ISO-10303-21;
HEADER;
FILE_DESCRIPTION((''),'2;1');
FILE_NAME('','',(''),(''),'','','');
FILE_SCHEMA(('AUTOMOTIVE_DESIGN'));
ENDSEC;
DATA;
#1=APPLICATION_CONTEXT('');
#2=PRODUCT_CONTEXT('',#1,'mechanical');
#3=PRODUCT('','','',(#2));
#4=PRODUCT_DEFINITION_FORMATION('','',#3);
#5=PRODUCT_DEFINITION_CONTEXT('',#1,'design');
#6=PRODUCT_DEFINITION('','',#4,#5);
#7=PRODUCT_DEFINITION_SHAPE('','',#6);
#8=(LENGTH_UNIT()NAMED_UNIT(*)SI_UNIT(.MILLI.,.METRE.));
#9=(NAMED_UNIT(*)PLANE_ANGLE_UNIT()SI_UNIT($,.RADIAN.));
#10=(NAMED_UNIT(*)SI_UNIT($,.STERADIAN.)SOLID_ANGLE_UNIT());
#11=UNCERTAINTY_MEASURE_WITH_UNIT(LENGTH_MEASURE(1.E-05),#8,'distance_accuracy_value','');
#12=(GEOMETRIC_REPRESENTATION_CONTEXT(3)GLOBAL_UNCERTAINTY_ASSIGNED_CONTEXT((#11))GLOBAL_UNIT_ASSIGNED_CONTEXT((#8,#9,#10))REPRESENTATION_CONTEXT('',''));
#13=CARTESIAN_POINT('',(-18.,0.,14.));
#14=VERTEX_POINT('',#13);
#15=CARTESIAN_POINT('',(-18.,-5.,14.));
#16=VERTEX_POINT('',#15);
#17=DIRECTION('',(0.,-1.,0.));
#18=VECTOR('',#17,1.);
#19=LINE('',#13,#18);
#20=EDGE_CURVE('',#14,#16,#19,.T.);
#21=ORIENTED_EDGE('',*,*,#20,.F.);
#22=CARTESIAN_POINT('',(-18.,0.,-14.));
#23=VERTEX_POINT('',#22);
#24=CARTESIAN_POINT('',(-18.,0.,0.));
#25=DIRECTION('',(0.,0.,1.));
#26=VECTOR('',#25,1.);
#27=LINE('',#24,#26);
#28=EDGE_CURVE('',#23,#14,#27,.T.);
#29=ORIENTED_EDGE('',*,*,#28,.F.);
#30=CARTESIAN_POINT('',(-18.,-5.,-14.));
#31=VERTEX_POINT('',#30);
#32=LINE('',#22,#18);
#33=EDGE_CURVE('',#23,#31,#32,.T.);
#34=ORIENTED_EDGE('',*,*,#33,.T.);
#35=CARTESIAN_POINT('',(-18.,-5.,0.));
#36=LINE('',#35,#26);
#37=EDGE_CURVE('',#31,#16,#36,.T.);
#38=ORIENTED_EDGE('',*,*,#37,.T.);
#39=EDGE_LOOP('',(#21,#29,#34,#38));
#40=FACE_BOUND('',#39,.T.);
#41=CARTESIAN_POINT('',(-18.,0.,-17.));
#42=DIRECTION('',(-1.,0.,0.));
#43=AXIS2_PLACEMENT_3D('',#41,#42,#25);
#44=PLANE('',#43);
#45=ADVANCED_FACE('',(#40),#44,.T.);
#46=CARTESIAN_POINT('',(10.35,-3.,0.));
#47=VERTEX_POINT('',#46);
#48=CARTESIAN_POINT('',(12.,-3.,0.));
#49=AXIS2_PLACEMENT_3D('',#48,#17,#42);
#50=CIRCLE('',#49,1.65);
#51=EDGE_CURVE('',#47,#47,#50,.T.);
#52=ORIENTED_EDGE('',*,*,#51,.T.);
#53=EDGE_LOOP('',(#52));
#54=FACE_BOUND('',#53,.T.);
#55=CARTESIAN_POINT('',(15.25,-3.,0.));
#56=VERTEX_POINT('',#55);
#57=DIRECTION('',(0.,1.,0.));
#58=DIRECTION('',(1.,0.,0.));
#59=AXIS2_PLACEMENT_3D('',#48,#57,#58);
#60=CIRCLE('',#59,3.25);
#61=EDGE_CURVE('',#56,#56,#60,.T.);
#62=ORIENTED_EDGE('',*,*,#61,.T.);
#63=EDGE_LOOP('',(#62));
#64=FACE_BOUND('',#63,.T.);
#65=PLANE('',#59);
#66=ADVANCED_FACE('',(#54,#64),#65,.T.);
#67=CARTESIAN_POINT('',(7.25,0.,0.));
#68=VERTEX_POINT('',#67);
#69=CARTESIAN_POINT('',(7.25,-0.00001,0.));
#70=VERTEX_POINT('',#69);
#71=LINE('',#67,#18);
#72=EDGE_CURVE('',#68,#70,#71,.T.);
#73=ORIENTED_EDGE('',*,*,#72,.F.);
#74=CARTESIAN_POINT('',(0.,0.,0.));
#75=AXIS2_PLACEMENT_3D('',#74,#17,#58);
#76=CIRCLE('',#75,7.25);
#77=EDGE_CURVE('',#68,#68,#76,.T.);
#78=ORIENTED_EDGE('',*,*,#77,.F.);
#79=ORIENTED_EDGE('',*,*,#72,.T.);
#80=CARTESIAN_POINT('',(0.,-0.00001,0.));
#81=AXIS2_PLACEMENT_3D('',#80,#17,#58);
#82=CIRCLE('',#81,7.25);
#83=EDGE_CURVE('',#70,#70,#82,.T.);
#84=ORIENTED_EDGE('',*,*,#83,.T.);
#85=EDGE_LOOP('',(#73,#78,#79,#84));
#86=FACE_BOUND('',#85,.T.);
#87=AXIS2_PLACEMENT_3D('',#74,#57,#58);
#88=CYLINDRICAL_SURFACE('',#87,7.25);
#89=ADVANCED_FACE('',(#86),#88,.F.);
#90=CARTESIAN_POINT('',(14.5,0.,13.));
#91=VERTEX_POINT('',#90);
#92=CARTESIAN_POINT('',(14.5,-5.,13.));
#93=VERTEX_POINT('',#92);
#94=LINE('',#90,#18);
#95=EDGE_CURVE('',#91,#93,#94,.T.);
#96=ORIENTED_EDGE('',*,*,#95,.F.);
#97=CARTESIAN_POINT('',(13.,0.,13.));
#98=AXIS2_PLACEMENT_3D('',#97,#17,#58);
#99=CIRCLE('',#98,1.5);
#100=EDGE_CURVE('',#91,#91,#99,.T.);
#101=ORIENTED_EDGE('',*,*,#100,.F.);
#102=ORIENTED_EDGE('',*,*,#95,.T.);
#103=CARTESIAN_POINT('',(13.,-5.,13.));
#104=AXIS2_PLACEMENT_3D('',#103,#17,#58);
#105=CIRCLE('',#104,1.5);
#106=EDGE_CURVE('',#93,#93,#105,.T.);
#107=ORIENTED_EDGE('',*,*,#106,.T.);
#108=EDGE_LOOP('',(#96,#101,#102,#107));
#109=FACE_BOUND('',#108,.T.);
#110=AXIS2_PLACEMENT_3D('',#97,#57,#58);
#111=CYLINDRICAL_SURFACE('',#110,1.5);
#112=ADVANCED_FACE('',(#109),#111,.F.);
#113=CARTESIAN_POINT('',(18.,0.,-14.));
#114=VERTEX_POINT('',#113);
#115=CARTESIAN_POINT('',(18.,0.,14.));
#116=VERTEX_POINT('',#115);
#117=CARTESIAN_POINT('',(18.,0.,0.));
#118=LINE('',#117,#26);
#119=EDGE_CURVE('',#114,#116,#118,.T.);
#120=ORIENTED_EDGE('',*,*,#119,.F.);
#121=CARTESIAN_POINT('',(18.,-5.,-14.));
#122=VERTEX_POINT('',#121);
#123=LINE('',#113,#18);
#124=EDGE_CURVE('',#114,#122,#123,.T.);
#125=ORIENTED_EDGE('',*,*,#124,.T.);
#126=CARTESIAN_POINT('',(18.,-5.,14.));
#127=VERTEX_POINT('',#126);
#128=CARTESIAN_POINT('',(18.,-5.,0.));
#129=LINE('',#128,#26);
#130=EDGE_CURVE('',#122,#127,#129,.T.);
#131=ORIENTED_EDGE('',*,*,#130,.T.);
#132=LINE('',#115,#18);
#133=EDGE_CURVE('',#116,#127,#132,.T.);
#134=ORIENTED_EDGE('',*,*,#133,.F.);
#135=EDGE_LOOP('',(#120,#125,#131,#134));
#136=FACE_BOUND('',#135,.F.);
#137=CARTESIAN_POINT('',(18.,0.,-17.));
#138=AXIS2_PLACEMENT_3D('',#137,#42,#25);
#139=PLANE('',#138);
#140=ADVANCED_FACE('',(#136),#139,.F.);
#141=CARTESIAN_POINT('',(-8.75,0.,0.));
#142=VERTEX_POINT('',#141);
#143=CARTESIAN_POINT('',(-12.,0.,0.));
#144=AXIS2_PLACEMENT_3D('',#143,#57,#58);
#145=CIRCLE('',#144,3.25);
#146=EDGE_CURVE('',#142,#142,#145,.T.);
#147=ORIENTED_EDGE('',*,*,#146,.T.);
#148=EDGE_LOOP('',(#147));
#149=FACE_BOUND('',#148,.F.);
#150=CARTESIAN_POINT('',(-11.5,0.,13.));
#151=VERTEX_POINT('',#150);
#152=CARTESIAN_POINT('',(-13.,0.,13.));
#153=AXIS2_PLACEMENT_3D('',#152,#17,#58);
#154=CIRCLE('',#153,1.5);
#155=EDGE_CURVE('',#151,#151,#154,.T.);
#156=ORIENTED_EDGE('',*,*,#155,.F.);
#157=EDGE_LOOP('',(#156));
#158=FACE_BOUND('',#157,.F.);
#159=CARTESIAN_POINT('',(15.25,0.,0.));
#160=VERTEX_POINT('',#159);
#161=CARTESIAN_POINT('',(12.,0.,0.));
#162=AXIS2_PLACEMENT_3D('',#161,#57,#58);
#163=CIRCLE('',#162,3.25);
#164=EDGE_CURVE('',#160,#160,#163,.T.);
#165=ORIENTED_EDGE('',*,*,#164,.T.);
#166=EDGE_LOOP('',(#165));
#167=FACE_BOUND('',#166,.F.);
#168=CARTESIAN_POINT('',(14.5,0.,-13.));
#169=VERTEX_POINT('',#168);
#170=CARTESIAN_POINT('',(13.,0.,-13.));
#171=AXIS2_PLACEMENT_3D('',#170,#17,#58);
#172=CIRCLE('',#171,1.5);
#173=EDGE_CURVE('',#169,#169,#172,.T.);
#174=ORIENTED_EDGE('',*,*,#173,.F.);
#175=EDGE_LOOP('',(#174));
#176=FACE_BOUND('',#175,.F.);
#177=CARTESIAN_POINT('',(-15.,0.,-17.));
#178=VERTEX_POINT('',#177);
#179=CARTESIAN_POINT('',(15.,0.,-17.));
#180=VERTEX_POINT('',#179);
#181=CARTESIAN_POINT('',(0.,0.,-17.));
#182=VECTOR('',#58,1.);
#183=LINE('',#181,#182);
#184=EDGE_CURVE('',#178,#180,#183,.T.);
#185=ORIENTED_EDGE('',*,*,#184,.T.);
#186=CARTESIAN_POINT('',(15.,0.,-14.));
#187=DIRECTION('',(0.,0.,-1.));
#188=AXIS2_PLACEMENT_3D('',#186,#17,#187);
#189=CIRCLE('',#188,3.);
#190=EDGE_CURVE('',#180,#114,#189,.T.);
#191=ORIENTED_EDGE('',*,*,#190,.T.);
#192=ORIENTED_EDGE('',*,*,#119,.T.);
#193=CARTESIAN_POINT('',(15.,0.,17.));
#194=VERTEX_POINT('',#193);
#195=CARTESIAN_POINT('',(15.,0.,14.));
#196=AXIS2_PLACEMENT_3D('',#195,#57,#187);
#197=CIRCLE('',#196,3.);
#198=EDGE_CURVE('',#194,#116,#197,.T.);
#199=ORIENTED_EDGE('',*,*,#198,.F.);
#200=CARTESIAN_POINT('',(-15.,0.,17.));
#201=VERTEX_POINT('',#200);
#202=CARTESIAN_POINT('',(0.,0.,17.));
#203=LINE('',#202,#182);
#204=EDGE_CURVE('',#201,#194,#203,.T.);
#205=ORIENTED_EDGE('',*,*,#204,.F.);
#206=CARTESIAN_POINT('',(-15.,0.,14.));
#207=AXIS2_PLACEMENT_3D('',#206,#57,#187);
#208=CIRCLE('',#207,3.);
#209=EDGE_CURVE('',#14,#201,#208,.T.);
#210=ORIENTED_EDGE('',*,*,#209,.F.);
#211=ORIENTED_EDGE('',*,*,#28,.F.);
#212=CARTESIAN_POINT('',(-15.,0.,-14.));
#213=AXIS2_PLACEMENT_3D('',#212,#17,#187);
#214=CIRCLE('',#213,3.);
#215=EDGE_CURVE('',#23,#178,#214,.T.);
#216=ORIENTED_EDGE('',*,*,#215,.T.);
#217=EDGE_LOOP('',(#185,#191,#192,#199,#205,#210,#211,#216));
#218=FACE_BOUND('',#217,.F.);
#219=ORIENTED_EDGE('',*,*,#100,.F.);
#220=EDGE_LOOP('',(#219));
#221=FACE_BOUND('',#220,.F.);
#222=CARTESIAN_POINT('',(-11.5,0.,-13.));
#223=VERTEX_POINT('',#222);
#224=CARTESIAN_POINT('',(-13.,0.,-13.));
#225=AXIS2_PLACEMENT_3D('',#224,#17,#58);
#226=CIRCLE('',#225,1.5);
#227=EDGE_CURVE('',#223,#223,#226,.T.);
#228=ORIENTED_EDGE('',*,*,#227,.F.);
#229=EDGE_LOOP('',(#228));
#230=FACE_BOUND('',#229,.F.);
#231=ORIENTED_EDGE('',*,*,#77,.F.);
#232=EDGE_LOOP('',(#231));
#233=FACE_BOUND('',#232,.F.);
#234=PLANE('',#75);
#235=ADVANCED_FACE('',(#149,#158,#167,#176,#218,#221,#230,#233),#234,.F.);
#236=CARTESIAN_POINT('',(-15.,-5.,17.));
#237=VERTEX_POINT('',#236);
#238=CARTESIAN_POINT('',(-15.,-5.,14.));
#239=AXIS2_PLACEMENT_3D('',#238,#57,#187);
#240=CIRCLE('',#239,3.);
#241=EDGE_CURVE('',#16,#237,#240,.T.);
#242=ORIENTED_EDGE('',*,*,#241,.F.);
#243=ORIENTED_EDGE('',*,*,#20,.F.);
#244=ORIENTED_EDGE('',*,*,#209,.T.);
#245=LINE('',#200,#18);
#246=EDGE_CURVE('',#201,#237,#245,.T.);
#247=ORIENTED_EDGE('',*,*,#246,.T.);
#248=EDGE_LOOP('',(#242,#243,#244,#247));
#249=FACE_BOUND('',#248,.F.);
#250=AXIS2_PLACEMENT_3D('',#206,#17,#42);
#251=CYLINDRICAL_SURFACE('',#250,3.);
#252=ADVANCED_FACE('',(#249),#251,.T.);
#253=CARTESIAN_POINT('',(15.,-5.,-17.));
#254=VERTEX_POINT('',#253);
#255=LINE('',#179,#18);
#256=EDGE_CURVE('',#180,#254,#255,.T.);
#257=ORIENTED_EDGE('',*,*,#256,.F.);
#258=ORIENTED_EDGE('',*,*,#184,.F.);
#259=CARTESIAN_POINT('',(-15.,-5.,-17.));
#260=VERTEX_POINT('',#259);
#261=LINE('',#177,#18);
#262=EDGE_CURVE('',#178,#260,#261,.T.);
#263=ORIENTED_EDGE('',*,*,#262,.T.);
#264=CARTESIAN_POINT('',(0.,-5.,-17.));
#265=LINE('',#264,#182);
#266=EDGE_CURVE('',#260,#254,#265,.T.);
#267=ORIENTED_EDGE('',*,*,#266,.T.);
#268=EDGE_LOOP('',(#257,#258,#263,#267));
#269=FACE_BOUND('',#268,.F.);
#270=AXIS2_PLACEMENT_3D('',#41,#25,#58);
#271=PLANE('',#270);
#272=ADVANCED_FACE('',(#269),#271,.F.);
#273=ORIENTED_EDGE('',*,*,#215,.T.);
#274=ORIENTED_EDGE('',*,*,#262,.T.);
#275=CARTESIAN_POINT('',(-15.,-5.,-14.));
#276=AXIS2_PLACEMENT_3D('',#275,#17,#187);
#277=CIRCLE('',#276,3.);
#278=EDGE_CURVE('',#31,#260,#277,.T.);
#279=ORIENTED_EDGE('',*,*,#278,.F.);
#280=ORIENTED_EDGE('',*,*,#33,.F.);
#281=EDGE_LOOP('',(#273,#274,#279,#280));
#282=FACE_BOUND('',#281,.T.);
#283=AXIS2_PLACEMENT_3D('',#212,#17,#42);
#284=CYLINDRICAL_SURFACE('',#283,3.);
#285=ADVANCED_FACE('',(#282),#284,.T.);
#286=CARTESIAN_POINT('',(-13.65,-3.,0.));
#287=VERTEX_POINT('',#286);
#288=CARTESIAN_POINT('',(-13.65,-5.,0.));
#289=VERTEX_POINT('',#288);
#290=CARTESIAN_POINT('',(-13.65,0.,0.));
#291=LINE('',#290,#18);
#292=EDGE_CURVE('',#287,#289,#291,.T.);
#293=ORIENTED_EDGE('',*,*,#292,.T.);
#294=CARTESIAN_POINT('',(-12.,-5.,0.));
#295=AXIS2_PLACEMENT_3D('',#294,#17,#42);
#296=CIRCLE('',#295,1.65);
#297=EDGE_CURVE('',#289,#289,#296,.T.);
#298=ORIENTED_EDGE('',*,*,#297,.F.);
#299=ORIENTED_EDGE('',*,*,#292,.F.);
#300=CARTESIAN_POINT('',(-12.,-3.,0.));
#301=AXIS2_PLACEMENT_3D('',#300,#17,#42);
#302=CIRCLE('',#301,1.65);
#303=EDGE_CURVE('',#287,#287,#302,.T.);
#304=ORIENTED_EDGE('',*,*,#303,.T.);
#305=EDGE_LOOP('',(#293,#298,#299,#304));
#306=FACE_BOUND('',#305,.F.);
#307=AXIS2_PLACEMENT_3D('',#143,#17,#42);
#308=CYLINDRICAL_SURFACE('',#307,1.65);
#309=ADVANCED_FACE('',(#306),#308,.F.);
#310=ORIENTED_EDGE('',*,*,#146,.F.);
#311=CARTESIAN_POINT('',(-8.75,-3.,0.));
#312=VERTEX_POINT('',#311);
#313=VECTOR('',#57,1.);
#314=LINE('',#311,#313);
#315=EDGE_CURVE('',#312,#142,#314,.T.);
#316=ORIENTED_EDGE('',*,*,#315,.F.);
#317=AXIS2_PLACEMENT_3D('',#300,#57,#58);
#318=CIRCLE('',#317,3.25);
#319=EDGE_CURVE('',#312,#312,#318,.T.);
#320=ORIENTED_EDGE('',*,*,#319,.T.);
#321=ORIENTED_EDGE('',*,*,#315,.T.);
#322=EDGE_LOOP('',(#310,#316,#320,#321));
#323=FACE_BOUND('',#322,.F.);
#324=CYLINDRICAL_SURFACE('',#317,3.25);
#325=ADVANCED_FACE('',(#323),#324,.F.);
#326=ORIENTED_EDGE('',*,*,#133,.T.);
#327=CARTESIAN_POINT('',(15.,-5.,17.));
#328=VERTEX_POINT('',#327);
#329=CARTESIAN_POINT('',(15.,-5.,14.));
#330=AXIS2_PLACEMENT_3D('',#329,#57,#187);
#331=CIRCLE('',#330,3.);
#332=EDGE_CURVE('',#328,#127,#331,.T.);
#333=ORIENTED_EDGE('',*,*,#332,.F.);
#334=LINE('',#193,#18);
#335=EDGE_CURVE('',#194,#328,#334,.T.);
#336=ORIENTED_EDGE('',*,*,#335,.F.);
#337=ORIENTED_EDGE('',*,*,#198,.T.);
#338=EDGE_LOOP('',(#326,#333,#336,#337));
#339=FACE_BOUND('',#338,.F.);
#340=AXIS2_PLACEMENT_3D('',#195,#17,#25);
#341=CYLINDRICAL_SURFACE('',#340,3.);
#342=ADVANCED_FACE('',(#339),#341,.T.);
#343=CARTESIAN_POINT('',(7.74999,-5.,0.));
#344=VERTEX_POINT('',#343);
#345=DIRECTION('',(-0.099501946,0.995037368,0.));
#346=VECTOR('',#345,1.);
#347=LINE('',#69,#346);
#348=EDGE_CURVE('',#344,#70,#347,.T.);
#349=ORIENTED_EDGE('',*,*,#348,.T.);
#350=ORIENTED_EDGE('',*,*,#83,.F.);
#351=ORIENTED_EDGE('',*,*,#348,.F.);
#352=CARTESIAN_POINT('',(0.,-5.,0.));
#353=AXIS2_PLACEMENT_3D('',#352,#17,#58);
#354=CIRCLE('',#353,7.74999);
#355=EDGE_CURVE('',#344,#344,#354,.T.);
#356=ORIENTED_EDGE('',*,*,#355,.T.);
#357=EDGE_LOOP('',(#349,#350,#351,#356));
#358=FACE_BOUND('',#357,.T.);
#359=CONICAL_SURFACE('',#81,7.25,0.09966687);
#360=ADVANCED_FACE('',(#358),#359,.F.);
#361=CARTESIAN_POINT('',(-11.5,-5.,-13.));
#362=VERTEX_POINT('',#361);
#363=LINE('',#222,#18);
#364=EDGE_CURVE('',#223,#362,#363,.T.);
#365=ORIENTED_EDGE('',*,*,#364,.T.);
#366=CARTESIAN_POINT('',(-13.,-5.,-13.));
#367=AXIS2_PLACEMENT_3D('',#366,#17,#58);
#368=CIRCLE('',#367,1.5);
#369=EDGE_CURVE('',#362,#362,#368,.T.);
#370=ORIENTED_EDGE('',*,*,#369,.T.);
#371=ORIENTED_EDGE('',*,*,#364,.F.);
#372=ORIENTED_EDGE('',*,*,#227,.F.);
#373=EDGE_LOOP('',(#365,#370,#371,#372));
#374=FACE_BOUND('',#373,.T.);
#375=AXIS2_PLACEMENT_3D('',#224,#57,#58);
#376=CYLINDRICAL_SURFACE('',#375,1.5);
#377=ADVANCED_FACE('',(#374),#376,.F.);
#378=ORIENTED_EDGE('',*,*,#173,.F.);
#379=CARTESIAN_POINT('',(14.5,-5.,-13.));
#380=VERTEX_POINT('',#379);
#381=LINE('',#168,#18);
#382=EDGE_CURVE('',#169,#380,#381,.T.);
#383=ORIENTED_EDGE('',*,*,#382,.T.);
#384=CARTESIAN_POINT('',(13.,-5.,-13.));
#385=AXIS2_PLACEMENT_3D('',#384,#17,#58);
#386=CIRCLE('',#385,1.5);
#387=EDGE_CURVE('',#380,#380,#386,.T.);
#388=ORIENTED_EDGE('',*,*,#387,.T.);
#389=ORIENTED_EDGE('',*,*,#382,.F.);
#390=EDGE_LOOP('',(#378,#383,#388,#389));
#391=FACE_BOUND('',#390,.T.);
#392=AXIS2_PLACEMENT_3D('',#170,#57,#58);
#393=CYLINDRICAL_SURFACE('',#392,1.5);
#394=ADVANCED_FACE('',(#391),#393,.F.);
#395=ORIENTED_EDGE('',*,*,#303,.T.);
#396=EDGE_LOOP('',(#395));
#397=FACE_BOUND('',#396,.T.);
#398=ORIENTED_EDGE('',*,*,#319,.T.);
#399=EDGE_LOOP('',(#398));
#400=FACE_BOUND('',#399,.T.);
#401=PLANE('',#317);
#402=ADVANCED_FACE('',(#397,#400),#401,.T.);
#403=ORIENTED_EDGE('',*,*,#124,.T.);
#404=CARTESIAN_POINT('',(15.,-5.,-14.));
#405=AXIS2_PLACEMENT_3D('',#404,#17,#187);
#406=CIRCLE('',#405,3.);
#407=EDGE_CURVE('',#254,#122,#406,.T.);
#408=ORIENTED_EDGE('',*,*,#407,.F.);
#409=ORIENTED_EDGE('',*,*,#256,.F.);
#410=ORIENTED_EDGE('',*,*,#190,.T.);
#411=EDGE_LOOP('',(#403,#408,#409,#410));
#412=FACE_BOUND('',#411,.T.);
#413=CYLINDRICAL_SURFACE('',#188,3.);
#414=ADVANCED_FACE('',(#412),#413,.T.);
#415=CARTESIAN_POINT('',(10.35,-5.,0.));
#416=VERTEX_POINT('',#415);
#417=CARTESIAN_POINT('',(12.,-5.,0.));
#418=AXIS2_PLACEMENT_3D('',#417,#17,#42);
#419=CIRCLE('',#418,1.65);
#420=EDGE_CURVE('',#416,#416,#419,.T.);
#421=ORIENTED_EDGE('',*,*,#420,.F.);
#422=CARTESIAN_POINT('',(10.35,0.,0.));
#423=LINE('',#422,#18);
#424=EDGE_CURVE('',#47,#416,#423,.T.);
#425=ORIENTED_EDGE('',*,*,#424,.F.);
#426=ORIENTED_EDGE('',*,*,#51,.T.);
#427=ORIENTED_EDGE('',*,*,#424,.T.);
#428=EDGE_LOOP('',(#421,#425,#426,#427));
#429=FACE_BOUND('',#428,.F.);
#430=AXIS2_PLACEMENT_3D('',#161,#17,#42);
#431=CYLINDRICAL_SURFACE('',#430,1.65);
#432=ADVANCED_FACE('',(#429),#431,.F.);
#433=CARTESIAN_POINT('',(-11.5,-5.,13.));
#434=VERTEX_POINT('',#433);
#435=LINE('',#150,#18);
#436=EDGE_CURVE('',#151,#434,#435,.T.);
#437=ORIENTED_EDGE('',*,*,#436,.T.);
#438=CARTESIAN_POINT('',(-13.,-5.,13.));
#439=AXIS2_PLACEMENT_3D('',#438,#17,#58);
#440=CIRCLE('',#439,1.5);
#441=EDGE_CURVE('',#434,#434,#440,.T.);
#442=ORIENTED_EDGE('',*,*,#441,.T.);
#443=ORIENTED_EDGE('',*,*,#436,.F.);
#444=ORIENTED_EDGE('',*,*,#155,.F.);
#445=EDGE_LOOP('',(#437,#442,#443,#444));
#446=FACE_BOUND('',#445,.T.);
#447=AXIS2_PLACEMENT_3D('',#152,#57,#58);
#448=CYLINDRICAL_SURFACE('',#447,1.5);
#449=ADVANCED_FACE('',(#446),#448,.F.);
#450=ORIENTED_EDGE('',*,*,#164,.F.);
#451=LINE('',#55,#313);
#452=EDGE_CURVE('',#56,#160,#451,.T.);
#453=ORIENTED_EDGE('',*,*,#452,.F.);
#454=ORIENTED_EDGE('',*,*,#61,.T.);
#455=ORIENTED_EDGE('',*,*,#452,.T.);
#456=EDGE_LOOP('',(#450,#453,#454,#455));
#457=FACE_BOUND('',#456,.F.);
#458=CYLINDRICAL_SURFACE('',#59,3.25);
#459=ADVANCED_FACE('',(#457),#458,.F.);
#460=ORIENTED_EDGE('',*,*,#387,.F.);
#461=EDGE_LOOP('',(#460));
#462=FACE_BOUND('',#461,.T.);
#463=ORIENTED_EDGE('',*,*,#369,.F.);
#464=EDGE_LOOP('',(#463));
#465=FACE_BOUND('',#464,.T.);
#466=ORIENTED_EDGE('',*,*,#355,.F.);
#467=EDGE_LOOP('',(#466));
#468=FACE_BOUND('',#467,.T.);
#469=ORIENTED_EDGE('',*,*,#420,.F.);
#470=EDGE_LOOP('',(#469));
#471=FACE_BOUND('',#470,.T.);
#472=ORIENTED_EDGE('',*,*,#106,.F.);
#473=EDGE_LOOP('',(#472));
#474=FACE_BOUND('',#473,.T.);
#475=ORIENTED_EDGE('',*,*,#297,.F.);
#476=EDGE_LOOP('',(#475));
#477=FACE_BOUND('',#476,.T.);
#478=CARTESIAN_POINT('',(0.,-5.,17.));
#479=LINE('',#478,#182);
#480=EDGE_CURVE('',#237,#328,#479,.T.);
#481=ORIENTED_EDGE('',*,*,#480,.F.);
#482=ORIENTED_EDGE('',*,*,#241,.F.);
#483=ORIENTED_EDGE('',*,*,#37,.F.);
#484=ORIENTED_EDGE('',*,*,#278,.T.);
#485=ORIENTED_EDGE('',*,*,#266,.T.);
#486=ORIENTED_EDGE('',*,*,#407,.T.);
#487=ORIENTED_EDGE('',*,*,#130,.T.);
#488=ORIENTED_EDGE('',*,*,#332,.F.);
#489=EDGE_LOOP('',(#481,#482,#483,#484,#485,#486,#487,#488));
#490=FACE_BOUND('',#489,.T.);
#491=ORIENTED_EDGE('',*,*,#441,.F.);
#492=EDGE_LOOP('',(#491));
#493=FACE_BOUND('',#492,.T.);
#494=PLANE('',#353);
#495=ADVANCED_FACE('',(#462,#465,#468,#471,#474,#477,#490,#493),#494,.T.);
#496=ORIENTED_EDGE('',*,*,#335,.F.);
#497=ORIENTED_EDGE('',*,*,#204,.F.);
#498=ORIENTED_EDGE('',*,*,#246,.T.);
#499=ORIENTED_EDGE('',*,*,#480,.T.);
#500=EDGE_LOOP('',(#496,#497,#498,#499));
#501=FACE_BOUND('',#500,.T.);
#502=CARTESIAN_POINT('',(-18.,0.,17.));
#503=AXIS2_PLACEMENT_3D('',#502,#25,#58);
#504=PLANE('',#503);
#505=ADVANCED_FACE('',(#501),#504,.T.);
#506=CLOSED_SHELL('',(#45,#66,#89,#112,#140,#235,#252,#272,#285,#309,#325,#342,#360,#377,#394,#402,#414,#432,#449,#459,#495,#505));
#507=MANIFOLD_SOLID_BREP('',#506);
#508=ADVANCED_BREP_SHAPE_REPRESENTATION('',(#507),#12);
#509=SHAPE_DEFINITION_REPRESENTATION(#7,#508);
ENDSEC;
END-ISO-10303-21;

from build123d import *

# Parameters (mm, degrees)
F0_W           = 36
F0_H           = 34
F0_R           = 1.5
F0_R_2         = 7.25
F1_DEPTH       = 5
F2_R           = 3
F3_SIZE2       = 4.99999
F3_SIZE        = 0.49999
F4_D           = 3.3
F4_CBORE_D     = 6.5
F4_CBORE_DEPTH = 3


# Not quite as in the source:
# - a fillet or chamfer is up to 0.001 mm smaller than in the source, because OpenCascade refuses the exact size


with BuildPart() as f1:
    # F0 (on Front) → F1 (new body)
    with BuildSketch(Plane.XZ):
        Rectangle(F0_W, F0_H)
        with Locations((-13, -13)):
            Circle(F0_R, mode=Mode.SUBTRACT)
        with Locations((13, -13)):
            Circle(F0_R, mode=Mode.SUBTRACT)
        with Locations((-13, 13)):
            Circle(F0_R, mode=Mode.SUBTRACT)
        Circle(F0_R_2, mode=Mode.SUBTRACT)
        with Locations((13, 13)):
            Circle(F0_R, mode=Mode.SUBTRACT)
    extrude(amount=F1_DEPTH)

    # F2
    f2_edges = [f1.edges().sort_by_distance(p)[0] for p in [
        (-18, -2.5, 17),
        (18, -2.5, 17),
        (18, -2.5, -17),
        (-18, -2.5, -17),
    ]]
    fillet(f2_edges, radius=F2_R)

    # F3 (size 0.5 and 5 in the source; OpenCascade refuses exactly that, so slightly less here)
    f3_edges = [f1.edges().sort_by_distance(p)[0] for p in [
        (-7.25, -5, 0),
    ]]
    f3_side = f1.faces().sort_by_distance((0, -5, -16.504823))[0]
    chamfer(f3_edges, length=F3_SIZE, length2=F3_SIZE2, reference=f3_side)

    # F4 (through all)
    with Locations(Plane(origin=(0, 0, 0), x_dir=(1, 0, 0), z_dir=(0, 1, 0))):
        with Locations((12, 0), (-12, 0)):
            CounterBoreHole(F4_D / 2, F4_CBORE_D / 2, F4_CBORE_DEPTH)


solid = f1.part
